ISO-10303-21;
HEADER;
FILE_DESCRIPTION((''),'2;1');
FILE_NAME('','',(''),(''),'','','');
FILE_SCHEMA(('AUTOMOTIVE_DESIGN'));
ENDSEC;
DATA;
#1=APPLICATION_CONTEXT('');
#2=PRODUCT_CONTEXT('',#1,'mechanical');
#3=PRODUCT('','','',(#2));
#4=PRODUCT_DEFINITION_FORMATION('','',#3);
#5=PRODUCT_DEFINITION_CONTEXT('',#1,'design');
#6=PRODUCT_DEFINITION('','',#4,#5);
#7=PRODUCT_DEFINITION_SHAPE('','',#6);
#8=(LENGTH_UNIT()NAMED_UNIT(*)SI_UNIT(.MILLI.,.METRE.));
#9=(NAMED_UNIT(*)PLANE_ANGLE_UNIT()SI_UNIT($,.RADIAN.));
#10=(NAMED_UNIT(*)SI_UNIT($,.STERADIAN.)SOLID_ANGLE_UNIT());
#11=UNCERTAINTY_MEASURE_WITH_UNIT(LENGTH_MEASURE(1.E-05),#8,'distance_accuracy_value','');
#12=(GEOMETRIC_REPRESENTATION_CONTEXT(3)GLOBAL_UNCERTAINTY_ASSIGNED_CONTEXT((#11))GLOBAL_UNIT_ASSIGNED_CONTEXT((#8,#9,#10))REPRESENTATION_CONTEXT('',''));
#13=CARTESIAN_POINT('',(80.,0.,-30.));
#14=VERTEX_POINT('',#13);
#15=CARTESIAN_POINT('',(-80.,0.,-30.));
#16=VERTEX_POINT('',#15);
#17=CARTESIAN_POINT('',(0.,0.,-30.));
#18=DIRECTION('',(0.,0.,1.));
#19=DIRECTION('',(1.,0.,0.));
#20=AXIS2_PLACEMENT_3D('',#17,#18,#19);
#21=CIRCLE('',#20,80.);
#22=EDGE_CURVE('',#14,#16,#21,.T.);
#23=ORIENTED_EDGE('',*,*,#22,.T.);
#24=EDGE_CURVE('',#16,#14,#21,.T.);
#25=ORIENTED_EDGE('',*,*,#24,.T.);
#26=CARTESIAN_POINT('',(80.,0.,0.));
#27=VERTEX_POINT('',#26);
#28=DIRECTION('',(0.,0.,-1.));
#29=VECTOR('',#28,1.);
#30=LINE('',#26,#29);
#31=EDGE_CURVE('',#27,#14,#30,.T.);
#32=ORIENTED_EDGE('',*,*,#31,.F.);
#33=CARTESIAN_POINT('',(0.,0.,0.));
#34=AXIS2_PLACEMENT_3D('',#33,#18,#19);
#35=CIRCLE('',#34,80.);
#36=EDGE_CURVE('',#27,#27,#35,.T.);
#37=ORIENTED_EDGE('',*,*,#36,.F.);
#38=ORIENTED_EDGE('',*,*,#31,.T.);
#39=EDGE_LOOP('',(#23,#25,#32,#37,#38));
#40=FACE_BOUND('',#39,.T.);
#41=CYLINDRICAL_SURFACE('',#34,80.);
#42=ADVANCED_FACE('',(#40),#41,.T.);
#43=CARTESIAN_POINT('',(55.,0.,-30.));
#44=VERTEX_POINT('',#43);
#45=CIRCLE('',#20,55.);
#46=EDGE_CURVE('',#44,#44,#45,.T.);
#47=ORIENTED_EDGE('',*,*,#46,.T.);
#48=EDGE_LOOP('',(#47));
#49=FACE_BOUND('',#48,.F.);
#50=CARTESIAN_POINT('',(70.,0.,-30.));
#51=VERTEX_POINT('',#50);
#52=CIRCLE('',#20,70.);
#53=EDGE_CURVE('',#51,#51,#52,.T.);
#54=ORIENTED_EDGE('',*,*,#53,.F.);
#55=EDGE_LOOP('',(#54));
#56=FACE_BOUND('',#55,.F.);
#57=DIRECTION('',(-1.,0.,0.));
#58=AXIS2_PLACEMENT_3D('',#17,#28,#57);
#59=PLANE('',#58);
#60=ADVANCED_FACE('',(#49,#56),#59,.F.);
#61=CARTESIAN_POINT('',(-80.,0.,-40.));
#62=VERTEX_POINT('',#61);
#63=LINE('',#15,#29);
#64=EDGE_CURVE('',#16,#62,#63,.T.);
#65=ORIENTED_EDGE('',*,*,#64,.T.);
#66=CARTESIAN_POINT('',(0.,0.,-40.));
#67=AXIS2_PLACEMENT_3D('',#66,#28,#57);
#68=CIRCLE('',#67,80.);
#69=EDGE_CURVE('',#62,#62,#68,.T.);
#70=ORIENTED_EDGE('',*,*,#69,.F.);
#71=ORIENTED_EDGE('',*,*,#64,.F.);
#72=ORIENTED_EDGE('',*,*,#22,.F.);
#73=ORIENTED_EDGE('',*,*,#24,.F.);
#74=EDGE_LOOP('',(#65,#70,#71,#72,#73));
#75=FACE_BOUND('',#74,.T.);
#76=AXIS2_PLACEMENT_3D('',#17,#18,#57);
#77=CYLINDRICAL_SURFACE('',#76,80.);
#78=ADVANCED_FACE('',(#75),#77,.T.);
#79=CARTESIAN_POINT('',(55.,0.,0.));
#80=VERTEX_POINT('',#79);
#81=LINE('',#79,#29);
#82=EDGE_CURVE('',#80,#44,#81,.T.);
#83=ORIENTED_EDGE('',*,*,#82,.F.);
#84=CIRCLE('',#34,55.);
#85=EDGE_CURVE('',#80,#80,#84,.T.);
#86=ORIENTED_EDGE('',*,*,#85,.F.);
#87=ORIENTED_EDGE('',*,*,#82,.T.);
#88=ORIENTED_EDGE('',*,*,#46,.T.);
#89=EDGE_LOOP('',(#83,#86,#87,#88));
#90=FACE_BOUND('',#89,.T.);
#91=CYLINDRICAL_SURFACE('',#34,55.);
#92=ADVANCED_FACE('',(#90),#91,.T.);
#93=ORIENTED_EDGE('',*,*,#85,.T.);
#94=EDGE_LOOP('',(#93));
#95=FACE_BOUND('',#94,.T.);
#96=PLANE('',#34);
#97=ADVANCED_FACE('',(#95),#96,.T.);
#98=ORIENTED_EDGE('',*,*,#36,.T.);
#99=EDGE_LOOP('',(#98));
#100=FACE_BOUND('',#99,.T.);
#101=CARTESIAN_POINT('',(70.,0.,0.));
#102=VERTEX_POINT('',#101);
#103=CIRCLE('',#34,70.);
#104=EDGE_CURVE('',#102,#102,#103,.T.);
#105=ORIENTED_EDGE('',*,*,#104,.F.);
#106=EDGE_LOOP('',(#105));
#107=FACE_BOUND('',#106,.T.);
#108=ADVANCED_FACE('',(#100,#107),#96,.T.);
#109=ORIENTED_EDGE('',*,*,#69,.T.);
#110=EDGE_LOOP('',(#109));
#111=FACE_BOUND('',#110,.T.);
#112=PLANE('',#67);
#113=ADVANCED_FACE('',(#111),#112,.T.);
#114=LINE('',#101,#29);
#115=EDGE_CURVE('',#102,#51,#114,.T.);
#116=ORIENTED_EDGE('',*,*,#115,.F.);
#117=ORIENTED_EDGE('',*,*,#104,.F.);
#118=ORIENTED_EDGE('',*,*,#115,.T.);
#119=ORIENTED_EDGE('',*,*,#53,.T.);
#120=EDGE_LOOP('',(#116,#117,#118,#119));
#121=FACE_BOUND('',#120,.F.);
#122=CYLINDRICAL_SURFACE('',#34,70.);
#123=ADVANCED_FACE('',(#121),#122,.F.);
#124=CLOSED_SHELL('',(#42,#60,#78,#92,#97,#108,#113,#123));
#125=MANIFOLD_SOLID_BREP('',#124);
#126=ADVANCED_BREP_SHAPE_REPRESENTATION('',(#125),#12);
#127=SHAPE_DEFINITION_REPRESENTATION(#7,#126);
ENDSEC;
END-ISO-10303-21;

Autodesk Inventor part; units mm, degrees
ref_plane "YZ Plane" through (0, 0, 0) normal (1, 0, 0) x (0, 1, 0)
ref_plane "XZ Plane" through (0, 0, 0) normal (0, 1, 0) x (-1, 0, 0)
ref_plane "XY Plane" through (0, 0, 0) normal (0, 0, 1) x (1, 0, 0)
sketch "草圖1" plane through (0, 0, 0) normal (0, 0, 1) x (1, 0, 0)
  circle A0 centre (0, 0) radius 80
  circle A1 centre (0, 0) radius 70
  circle A2 centre (0, 0) radius 55
  dimension "d0" = 160
  dimension "d1" = 140
  dimension "d2" = 110
extrude "擠出1" add sketch "草圖1" against normal blind 30
sketch "草圖2" plane through (0, 0, -30) normal (0, 0, -1) x (-1, 0, 0)
  circle A0 centre (0, 0) radius 80 projected
extrude "擠出2" add sketch "草圖2" along normal blind 10
sketch "草圖3" plane through (0, 0, -40) normal (0, 0, -1) x (-1, 0, 0)
  circle A0 centre (0, 0) radius 25
  dimension "d7" = 50
sketch "草圖4" plane through (0, 0, 0) normal (0, 0, 1) x (1, 0, 0)
  circle A0 centre (0, 0) radius 80 projected
  circle A1 centre (0, 0) radius 70 projected
  line L0 (0, 0) -> (-69.282, -40) construction
  line L1 (0, 0) -> (69.282, -40) construction
  line L2 (0, 0) -> (80, 0) construction
  line L3 (0, 0) -> (-80, 0) construction
  circle A2 centre (0, 0) radius 80 projected
  line L4 (-69.282, -40) -> (-61.4878, -35.5)
  line L5 (69.282, -40) -> (61.4878, -35.5)
  circle A3 centre (0, 0) radius 70 projected
  arc A4 (-61.4878, -35.5) -> (61.4878, -35.5) centre (0, 0) ccw
  dimension "d10" = 30
  dimension "d11" = 30
  dimension "d13" = 71
sketch "草圖5" plane through (0, 0, 0) normal (0, 1, 0) x (-1, 0, 0)
  line L0 (-59.2626, 395) -> (59.2626, 395) construction
  line L1 (0, 0) -> (0, 395) construction
  line L2 (66.7748, 395) -> (-66.7748, 395) construction
  line L3 (67.5187, 0) -> (67.5187, 395) construction
  line L4 (-67.5187, 0) -> (-67.5187, 395) construction
  arc A0 (67.5187, 375.1961) -> (-67.5187, 375.1961) centre (0, 270) ccw
  line L5 (67.5187, 375.1961) -> (67.5187, 415)
  line L6 (-67.5187, 375.1961) -> (-67.5187, 415)
  line L7 (-67.5187, 415) -> (67.5187, 415)
  dimension "d19" = 125
  dimension "d20" = 20
properties part number "螺旋鉤子底座"
